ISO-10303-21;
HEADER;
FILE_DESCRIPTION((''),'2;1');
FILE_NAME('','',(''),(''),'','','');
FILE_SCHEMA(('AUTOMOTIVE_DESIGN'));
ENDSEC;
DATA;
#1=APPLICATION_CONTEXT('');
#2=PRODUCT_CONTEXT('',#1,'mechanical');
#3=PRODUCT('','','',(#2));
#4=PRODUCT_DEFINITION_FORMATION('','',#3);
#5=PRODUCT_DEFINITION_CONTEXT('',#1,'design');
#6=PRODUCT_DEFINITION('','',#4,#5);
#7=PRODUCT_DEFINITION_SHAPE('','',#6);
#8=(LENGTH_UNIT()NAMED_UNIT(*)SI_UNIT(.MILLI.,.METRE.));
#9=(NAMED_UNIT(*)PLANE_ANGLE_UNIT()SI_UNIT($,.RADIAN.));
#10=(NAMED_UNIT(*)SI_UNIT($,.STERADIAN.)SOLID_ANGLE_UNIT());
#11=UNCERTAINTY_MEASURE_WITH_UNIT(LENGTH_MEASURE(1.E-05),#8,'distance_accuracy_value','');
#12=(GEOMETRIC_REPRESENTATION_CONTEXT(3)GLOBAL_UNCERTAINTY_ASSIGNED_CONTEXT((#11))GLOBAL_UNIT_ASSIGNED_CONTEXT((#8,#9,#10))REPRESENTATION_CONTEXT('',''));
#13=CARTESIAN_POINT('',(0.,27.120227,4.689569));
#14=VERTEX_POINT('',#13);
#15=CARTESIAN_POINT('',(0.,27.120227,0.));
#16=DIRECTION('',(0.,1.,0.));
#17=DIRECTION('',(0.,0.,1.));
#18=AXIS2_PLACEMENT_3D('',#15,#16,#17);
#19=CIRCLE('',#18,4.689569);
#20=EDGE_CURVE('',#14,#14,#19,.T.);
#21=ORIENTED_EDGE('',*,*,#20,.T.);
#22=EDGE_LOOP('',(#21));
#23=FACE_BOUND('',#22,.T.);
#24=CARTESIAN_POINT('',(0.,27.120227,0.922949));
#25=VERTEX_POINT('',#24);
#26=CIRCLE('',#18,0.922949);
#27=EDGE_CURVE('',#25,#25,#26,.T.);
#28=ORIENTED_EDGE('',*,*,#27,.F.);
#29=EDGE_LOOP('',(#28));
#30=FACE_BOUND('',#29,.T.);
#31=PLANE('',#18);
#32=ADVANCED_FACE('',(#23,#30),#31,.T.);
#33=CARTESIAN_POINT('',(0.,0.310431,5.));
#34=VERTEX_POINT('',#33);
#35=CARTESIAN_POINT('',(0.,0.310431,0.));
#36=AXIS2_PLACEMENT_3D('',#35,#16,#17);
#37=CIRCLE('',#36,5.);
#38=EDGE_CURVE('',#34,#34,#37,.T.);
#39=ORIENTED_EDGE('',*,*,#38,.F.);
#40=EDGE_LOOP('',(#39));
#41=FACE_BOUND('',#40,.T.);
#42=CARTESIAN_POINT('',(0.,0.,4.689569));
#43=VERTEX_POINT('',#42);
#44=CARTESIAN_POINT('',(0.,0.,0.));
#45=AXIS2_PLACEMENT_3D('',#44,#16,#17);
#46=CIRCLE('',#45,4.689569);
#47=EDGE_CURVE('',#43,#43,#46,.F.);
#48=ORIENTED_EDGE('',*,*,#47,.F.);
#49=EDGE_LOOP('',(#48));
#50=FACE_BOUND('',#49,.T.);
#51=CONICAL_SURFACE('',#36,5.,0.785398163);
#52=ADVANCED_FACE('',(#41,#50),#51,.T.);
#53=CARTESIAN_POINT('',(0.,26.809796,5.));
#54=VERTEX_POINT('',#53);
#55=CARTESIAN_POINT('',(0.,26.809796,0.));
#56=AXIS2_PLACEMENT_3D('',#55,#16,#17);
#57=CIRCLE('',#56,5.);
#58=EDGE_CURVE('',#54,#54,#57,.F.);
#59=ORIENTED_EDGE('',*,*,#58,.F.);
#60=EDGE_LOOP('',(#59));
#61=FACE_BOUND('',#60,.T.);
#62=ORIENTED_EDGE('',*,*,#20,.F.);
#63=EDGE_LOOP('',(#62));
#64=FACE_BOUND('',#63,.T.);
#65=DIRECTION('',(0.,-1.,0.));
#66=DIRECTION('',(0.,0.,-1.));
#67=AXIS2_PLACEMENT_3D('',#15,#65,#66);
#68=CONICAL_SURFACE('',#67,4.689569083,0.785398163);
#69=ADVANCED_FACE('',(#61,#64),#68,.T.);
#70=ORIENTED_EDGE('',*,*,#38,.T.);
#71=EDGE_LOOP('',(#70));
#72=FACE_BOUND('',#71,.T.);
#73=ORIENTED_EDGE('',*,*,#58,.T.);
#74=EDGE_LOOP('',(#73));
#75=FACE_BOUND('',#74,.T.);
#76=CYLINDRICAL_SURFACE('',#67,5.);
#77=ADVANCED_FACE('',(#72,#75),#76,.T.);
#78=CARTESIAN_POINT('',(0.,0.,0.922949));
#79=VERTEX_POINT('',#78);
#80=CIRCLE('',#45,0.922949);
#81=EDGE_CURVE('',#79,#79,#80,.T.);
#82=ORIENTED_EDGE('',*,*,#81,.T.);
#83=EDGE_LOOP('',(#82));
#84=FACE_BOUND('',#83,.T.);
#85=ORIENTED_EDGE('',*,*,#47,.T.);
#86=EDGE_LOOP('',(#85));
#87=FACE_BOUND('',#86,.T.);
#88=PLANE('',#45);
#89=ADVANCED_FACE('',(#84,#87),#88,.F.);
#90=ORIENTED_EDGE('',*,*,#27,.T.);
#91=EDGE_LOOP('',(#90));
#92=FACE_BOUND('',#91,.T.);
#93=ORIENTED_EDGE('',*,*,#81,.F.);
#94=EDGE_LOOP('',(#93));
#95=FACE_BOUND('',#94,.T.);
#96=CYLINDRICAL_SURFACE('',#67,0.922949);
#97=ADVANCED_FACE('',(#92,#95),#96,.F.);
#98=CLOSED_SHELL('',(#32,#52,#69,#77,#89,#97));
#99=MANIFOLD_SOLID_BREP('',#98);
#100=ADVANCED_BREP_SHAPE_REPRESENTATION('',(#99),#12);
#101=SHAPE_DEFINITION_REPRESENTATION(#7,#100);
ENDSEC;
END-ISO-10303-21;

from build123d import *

# Parameters (mm, degrees)
SKETCH1_R           = 5
BOSS_EXTRUDE1_DEPTH = 27.120227162
SKETCH2_R           = 0.922948922
CUT_EXTRUDE1_DEPTH  = 29.026892823
CHAMFER1_SIZE       = 0.310430917


with BuildPart() as part:
    # Sketch1 → Boss-Extrude1 (new body)
    with BuildSketch(Plane(origin=(0, 0, 0), x_dir=(1, 0, 0), z_dir=(0, 1, 0))):
        Circle(SKETCH1_R)
    extrude(amount=BOSS_EXTRUDE1_DEPTH)

    # Sketch2 → Cut-Extrude1 (cut, through all)
    with BuildSketch(Plane(origin=(0, 0, 0), x_dir=(1, 0, 0), z_dir=(0, 1, 0))):
        Circle(SKETCH2_R)
    extrude(amount=CUT_EXTRUDE1_DEPTH, mode=Mode.SUBTRACT)

    # Chamfer1
    chamfer1_edges = [part.edges().sort_by_distance(p)[0] for p in [
        (-5, 27.120227162, 0),
        (-5, 0, 0),
    ]]
    chamfer(chamfer1_edges, length=CHAMFER1_SIZE)


solid = part.part
